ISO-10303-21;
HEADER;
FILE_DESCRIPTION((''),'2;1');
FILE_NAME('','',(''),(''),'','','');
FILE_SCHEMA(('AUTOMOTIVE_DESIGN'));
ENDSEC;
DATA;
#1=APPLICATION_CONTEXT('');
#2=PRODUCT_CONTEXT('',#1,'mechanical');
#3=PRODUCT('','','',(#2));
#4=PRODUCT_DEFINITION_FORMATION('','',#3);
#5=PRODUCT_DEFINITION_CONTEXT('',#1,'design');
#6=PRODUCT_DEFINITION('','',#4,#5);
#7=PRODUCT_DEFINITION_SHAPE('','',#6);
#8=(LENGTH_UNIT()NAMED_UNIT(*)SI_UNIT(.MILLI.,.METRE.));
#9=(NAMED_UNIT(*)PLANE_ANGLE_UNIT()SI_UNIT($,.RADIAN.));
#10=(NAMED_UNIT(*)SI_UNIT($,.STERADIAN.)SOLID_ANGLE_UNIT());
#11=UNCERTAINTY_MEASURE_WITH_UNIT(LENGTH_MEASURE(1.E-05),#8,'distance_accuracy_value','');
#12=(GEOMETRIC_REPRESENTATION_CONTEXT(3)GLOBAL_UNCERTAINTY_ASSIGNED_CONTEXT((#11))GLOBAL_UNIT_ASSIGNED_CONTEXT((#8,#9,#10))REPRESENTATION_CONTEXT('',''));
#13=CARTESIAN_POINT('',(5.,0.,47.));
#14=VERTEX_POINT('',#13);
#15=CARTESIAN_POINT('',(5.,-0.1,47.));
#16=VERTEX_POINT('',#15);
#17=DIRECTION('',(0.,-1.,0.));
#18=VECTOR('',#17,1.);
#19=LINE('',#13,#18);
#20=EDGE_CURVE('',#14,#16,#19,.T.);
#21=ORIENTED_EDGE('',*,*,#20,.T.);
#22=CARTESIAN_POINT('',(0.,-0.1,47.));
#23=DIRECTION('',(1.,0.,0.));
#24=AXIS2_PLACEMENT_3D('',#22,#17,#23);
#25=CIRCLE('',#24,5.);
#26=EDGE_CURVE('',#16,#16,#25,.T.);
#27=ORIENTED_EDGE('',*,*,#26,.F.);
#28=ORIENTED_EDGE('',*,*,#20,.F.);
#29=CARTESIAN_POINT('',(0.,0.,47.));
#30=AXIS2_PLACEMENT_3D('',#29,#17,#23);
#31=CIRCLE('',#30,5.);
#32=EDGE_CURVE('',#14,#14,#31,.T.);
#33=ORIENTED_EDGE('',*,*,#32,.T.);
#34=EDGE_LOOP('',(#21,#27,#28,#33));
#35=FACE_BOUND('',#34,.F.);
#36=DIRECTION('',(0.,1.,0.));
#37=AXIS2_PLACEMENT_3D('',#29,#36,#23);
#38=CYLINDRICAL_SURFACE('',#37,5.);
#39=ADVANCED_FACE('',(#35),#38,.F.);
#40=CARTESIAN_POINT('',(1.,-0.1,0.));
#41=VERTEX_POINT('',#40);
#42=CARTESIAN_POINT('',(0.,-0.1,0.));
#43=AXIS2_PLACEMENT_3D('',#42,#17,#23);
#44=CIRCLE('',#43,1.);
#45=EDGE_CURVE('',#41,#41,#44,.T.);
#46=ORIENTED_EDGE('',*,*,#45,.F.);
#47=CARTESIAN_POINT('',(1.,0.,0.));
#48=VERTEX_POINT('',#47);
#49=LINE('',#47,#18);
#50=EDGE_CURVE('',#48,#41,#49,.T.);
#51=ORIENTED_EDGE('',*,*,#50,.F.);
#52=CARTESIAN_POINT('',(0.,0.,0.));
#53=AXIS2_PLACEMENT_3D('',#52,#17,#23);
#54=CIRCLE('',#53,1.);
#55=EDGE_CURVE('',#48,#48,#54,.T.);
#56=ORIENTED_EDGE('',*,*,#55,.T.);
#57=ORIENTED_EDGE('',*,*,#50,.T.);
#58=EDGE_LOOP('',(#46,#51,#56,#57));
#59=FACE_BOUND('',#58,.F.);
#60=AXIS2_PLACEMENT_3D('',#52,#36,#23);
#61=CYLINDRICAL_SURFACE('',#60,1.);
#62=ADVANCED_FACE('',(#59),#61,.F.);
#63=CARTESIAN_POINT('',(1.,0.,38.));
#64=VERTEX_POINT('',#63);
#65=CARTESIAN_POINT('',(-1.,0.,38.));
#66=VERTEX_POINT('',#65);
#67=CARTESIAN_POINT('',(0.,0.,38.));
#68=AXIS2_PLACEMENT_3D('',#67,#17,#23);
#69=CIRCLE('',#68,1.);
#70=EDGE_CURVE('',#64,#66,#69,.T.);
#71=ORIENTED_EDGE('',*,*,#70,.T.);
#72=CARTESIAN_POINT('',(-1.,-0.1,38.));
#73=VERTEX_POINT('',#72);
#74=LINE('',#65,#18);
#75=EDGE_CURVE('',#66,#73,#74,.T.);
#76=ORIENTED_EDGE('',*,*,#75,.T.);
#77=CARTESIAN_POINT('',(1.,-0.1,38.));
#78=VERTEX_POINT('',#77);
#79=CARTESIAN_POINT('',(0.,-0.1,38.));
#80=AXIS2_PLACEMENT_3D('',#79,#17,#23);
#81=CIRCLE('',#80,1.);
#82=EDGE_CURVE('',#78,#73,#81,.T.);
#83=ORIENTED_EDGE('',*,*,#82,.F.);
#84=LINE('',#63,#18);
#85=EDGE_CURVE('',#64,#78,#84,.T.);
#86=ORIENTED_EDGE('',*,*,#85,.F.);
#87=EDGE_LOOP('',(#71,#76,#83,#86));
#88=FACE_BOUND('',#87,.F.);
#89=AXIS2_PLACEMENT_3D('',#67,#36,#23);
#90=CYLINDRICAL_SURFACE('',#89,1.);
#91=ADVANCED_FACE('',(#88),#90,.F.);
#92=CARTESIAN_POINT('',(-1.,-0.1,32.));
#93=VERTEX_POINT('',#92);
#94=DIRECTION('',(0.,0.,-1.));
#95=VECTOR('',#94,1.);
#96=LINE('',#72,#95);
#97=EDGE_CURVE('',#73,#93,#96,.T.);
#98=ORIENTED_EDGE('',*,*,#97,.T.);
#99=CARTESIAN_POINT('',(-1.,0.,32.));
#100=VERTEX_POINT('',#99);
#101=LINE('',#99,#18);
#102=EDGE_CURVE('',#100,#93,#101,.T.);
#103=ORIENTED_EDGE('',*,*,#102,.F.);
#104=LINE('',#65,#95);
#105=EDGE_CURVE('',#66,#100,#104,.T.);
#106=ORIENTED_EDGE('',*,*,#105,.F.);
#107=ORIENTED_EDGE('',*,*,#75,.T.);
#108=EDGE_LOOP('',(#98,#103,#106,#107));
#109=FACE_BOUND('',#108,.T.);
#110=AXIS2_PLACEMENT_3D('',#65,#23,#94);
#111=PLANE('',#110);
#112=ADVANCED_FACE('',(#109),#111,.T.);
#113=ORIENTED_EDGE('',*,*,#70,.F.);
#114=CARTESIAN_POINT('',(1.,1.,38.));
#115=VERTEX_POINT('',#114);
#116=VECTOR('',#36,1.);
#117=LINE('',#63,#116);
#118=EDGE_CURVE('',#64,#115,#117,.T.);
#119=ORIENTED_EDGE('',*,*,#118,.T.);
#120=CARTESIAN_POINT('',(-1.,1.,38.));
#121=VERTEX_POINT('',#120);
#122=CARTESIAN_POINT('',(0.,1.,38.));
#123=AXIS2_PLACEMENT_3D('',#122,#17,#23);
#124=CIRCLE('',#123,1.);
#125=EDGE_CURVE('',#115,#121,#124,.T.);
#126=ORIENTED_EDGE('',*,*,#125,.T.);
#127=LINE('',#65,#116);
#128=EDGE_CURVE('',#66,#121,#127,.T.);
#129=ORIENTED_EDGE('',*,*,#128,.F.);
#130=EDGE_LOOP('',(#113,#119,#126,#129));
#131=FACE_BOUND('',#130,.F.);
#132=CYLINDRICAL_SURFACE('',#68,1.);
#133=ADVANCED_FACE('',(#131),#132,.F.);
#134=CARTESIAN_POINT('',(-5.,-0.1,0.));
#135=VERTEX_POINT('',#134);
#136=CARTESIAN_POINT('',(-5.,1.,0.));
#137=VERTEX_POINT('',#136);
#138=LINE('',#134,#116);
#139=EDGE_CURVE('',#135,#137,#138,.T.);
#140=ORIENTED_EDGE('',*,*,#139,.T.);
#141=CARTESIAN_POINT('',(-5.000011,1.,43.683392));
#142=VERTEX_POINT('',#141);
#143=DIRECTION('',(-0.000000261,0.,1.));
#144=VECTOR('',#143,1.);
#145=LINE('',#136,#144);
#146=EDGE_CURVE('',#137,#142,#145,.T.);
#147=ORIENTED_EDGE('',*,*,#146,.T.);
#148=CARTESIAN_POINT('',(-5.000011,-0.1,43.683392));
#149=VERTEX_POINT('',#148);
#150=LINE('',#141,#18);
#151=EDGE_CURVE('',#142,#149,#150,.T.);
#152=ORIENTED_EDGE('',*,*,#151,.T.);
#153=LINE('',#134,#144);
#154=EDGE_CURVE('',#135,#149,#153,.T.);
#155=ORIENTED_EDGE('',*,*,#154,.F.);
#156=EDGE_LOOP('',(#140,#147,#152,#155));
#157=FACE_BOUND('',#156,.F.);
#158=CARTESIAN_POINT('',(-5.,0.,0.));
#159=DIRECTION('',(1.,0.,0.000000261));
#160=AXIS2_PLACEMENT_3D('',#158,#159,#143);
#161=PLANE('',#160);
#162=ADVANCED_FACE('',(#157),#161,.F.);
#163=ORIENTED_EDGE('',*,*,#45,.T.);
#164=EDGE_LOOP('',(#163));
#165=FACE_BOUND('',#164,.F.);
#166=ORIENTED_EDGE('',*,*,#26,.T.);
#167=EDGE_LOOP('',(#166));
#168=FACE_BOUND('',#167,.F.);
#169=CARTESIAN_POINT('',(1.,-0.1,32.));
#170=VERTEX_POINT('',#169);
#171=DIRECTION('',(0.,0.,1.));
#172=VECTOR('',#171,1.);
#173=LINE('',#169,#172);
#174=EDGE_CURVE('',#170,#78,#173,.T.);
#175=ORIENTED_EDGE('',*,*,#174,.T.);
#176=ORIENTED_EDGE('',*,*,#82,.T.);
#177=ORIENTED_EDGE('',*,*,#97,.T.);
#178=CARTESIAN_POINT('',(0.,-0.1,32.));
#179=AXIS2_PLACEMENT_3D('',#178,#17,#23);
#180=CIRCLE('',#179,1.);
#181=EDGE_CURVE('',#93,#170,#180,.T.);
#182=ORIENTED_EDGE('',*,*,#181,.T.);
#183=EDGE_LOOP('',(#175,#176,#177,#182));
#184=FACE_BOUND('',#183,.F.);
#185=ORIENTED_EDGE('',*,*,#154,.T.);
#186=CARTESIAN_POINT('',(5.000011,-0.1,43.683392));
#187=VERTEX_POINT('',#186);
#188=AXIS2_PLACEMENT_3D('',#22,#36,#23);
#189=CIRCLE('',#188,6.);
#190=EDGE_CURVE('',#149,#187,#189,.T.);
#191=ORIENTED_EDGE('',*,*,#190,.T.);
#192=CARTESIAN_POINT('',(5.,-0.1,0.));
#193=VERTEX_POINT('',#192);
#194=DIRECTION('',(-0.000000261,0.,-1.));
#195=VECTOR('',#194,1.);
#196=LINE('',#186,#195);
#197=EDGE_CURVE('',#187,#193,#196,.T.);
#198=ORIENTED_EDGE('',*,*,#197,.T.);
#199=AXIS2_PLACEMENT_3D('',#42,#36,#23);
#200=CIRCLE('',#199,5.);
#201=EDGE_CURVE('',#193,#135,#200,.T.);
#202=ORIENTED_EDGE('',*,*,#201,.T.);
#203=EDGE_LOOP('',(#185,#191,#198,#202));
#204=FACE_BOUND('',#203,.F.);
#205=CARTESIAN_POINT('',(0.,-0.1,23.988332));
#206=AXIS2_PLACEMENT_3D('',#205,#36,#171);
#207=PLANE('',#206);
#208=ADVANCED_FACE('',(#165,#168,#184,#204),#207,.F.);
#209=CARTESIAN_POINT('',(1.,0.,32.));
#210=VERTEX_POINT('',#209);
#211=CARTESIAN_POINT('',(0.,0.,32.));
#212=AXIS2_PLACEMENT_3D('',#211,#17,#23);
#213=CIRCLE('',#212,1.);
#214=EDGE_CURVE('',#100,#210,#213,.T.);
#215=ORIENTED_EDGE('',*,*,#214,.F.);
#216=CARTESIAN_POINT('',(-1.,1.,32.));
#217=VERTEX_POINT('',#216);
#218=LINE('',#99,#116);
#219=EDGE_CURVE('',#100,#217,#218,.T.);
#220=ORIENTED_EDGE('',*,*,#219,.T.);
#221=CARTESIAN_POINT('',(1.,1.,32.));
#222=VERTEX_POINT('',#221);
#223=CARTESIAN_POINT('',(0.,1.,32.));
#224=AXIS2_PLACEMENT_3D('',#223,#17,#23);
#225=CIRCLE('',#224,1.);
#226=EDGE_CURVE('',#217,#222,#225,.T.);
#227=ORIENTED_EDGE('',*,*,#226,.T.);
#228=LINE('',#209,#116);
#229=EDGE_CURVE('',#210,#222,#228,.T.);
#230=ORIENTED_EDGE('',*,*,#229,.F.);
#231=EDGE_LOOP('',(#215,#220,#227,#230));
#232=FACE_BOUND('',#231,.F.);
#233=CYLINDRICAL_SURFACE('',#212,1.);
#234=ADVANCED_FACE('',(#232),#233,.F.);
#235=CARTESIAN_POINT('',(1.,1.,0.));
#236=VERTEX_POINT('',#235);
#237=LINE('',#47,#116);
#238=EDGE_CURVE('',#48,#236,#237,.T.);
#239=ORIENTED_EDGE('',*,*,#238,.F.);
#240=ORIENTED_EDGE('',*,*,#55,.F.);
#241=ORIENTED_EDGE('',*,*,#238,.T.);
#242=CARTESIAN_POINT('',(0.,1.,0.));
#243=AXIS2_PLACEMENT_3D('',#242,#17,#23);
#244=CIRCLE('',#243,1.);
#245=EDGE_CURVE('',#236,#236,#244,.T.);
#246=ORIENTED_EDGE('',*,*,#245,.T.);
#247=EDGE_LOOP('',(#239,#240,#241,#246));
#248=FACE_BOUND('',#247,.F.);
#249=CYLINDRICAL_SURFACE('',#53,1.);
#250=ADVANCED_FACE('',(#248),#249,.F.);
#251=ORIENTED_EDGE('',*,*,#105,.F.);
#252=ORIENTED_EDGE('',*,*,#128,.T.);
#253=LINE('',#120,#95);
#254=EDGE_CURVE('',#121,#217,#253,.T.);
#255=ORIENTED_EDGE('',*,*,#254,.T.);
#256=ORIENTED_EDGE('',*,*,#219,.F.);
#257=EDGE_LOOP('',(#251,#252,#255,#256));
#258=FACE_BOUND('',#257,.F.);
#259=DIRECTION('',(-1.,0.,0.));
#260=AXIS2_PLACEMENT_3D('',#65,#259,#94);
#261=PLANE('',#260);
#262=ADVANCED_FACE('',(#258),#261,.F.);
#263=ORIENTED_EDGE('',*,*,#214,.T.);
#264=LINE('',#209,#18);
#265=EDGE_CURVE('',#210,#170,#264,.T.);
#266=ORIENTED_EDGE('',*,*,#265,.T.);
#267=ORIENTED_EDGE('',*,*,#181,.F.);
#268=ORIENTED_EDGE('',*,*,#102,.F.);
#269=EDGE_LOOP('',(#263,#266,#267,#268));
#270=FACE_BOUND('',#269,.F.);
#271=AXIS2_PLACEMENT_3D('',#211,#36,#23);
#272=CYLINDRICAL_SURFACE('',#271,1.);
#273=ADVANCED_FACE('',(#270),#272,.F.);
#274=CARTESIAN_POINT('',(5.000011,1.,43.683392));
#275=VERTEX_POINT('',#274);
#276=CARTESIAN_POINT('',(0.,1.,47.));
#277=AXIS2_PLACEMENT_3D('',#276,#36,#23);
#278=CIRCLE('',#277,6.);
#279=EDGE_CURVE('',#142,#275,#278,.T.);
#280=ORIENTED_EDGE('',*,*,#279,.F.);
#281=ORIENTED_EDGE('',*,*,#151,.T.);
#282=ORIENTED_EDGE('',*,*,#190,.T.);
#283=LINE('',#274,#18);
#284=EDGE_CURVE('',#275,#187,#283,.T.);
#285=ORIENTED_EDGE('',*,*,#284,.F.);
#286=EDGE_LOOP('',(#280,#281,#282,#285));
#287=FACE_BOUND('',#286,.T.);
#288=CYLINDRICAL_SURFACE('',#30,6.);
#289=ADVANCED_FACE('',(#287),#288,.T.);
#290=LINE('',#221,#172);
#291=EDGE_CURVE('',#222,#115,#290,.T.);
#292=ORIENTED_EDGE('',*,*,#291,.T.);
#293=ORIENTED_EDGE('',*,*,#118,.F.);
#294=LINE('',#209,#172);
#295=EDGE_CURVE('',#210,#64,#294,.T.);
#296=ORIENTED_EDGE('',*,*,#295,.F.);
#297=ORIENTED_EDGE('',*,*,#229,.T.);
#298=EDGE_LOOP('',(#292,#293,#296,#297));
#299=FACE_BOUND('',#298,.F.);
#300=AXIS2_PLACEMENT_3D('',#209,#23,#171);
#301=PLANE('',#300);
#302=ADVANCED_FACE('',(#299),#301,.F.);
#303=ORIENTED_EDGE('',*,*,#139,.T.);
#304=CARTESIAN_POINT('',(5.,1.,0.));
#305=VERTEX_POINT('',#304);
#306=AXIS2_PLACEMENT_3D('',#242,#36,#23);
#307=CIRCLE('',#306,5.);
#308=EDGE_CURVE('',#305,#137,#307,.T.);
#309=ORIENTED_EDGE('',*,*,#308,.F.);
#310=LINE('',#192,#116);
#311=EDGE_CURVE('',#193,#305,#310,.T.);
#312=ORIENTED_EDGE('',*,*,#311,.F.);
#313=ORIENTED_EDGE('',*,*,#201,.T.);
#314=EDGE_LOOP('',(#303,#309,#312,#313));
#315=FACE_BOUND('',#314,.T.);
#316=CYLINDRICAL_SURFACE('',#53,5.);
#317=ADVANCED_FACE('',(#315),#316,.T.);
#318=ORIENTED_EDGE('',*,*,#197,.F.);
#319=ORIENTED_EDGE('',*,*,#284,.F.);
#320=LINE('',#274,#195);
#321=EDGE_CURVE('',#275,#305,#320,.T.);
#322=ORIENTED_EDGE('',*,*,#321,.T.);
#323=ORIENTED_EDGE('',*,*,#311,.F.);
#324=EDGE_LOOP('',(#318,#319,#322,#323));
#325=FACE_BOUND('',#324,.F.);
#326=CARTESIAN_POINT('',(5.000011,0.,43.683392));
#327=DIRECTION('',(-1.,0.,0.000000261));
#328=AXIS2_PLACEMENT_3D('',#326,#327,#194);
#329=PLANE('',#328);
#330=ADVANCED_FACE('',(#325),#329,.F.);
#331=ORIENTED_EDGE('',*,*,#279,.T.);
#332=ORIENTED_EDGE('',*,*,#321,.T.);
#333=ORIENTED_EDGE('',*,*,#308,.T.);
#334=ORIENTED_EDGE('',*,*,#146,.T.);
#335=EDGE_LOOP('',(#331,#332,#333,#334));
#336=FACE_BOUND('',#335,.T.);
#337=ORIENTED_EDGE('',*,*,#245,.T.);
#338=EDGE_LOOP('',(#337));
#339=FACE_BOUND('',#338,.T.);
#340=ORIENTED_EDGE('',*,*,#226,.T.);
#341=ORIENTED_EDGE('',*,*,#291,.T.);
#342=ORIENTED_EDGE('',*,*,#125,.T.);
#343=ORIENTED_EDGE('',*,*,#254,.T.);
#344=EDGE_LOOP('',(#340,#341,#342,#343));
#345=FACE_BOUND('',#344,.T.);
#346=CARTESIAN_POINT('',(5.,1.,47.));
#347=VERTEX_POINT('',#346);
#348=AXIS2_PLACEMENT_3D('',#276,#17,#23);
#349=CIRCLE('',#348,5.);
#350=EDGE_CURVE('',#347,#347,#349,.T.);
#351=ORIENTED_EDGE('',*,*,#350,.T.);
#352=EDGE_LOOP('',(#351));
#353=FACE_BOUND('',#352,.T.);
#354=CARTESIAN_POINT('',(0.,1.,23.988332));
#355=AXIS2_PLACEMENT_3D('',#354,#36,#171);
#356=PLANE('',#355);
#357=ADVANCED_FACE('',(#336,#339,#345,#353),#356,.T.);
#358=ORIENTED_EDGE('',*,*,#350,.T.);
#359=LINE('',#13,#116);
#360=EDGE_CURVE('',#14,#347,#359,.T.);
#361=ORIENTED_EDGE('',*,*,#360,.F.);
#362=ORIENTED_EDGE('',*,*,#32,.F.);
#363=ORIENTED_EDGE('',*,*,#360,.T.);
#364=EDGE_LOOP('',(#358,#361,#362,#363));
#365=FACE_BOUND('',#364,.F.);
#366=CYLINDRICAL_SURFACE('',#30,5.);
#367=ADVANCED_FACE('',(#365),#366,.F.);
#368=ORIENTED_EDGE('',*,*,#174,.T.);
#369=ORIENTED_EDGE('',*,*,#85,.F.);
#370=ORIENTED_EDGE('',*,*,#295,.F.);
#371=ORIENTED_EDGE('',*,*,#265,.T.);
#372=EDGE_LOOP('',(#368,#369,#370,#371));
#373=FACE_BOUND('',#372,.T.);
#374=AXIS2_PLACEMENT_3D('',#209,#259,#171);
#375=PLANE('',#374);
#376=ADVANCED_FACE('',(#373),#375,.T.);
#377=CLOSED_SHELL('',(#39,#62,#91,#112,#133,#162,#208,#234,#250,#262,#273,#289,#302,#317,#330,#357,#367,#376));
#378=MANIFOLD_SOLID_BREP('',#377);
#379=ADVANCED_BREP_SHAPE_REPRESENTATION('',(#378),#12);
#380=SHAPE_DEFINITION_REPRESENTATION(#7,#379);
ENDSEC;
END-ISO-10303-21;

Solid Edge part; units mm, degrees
sketch "Sketch1" plane through (0, 0, 0) normal (0, -1, 0) x (1, 0, 0)
  circle A0 centre (0, 0) radius 1
  circle A1 centre (0, 47) radius 5
  line L0 (5, 43.6834) -> (5, 0)
  arc A2 (-5, 43.6834) -> (5, 43.6834) centre (0, 47) cw
  line L1 (-5, 0) -> (-5, 43.6834)
  arc A3 (5, 0) -> (-5, 0) centre (0, 0) cw
  line L2 (1, 32) -> (1, 38)
  arc A4 (-1, 32) -> (1, 32) centre (0, 32) ccw
  line L3 (-1, 38) -> (-1, 32)
  arc A5 (1, 38) -> (-1, 38) centre (0, 38) ccw
extrude "Extrusionsausprägung_1" add sketch "Sketch1" against normal blind 1 and the other way blind 0.1
